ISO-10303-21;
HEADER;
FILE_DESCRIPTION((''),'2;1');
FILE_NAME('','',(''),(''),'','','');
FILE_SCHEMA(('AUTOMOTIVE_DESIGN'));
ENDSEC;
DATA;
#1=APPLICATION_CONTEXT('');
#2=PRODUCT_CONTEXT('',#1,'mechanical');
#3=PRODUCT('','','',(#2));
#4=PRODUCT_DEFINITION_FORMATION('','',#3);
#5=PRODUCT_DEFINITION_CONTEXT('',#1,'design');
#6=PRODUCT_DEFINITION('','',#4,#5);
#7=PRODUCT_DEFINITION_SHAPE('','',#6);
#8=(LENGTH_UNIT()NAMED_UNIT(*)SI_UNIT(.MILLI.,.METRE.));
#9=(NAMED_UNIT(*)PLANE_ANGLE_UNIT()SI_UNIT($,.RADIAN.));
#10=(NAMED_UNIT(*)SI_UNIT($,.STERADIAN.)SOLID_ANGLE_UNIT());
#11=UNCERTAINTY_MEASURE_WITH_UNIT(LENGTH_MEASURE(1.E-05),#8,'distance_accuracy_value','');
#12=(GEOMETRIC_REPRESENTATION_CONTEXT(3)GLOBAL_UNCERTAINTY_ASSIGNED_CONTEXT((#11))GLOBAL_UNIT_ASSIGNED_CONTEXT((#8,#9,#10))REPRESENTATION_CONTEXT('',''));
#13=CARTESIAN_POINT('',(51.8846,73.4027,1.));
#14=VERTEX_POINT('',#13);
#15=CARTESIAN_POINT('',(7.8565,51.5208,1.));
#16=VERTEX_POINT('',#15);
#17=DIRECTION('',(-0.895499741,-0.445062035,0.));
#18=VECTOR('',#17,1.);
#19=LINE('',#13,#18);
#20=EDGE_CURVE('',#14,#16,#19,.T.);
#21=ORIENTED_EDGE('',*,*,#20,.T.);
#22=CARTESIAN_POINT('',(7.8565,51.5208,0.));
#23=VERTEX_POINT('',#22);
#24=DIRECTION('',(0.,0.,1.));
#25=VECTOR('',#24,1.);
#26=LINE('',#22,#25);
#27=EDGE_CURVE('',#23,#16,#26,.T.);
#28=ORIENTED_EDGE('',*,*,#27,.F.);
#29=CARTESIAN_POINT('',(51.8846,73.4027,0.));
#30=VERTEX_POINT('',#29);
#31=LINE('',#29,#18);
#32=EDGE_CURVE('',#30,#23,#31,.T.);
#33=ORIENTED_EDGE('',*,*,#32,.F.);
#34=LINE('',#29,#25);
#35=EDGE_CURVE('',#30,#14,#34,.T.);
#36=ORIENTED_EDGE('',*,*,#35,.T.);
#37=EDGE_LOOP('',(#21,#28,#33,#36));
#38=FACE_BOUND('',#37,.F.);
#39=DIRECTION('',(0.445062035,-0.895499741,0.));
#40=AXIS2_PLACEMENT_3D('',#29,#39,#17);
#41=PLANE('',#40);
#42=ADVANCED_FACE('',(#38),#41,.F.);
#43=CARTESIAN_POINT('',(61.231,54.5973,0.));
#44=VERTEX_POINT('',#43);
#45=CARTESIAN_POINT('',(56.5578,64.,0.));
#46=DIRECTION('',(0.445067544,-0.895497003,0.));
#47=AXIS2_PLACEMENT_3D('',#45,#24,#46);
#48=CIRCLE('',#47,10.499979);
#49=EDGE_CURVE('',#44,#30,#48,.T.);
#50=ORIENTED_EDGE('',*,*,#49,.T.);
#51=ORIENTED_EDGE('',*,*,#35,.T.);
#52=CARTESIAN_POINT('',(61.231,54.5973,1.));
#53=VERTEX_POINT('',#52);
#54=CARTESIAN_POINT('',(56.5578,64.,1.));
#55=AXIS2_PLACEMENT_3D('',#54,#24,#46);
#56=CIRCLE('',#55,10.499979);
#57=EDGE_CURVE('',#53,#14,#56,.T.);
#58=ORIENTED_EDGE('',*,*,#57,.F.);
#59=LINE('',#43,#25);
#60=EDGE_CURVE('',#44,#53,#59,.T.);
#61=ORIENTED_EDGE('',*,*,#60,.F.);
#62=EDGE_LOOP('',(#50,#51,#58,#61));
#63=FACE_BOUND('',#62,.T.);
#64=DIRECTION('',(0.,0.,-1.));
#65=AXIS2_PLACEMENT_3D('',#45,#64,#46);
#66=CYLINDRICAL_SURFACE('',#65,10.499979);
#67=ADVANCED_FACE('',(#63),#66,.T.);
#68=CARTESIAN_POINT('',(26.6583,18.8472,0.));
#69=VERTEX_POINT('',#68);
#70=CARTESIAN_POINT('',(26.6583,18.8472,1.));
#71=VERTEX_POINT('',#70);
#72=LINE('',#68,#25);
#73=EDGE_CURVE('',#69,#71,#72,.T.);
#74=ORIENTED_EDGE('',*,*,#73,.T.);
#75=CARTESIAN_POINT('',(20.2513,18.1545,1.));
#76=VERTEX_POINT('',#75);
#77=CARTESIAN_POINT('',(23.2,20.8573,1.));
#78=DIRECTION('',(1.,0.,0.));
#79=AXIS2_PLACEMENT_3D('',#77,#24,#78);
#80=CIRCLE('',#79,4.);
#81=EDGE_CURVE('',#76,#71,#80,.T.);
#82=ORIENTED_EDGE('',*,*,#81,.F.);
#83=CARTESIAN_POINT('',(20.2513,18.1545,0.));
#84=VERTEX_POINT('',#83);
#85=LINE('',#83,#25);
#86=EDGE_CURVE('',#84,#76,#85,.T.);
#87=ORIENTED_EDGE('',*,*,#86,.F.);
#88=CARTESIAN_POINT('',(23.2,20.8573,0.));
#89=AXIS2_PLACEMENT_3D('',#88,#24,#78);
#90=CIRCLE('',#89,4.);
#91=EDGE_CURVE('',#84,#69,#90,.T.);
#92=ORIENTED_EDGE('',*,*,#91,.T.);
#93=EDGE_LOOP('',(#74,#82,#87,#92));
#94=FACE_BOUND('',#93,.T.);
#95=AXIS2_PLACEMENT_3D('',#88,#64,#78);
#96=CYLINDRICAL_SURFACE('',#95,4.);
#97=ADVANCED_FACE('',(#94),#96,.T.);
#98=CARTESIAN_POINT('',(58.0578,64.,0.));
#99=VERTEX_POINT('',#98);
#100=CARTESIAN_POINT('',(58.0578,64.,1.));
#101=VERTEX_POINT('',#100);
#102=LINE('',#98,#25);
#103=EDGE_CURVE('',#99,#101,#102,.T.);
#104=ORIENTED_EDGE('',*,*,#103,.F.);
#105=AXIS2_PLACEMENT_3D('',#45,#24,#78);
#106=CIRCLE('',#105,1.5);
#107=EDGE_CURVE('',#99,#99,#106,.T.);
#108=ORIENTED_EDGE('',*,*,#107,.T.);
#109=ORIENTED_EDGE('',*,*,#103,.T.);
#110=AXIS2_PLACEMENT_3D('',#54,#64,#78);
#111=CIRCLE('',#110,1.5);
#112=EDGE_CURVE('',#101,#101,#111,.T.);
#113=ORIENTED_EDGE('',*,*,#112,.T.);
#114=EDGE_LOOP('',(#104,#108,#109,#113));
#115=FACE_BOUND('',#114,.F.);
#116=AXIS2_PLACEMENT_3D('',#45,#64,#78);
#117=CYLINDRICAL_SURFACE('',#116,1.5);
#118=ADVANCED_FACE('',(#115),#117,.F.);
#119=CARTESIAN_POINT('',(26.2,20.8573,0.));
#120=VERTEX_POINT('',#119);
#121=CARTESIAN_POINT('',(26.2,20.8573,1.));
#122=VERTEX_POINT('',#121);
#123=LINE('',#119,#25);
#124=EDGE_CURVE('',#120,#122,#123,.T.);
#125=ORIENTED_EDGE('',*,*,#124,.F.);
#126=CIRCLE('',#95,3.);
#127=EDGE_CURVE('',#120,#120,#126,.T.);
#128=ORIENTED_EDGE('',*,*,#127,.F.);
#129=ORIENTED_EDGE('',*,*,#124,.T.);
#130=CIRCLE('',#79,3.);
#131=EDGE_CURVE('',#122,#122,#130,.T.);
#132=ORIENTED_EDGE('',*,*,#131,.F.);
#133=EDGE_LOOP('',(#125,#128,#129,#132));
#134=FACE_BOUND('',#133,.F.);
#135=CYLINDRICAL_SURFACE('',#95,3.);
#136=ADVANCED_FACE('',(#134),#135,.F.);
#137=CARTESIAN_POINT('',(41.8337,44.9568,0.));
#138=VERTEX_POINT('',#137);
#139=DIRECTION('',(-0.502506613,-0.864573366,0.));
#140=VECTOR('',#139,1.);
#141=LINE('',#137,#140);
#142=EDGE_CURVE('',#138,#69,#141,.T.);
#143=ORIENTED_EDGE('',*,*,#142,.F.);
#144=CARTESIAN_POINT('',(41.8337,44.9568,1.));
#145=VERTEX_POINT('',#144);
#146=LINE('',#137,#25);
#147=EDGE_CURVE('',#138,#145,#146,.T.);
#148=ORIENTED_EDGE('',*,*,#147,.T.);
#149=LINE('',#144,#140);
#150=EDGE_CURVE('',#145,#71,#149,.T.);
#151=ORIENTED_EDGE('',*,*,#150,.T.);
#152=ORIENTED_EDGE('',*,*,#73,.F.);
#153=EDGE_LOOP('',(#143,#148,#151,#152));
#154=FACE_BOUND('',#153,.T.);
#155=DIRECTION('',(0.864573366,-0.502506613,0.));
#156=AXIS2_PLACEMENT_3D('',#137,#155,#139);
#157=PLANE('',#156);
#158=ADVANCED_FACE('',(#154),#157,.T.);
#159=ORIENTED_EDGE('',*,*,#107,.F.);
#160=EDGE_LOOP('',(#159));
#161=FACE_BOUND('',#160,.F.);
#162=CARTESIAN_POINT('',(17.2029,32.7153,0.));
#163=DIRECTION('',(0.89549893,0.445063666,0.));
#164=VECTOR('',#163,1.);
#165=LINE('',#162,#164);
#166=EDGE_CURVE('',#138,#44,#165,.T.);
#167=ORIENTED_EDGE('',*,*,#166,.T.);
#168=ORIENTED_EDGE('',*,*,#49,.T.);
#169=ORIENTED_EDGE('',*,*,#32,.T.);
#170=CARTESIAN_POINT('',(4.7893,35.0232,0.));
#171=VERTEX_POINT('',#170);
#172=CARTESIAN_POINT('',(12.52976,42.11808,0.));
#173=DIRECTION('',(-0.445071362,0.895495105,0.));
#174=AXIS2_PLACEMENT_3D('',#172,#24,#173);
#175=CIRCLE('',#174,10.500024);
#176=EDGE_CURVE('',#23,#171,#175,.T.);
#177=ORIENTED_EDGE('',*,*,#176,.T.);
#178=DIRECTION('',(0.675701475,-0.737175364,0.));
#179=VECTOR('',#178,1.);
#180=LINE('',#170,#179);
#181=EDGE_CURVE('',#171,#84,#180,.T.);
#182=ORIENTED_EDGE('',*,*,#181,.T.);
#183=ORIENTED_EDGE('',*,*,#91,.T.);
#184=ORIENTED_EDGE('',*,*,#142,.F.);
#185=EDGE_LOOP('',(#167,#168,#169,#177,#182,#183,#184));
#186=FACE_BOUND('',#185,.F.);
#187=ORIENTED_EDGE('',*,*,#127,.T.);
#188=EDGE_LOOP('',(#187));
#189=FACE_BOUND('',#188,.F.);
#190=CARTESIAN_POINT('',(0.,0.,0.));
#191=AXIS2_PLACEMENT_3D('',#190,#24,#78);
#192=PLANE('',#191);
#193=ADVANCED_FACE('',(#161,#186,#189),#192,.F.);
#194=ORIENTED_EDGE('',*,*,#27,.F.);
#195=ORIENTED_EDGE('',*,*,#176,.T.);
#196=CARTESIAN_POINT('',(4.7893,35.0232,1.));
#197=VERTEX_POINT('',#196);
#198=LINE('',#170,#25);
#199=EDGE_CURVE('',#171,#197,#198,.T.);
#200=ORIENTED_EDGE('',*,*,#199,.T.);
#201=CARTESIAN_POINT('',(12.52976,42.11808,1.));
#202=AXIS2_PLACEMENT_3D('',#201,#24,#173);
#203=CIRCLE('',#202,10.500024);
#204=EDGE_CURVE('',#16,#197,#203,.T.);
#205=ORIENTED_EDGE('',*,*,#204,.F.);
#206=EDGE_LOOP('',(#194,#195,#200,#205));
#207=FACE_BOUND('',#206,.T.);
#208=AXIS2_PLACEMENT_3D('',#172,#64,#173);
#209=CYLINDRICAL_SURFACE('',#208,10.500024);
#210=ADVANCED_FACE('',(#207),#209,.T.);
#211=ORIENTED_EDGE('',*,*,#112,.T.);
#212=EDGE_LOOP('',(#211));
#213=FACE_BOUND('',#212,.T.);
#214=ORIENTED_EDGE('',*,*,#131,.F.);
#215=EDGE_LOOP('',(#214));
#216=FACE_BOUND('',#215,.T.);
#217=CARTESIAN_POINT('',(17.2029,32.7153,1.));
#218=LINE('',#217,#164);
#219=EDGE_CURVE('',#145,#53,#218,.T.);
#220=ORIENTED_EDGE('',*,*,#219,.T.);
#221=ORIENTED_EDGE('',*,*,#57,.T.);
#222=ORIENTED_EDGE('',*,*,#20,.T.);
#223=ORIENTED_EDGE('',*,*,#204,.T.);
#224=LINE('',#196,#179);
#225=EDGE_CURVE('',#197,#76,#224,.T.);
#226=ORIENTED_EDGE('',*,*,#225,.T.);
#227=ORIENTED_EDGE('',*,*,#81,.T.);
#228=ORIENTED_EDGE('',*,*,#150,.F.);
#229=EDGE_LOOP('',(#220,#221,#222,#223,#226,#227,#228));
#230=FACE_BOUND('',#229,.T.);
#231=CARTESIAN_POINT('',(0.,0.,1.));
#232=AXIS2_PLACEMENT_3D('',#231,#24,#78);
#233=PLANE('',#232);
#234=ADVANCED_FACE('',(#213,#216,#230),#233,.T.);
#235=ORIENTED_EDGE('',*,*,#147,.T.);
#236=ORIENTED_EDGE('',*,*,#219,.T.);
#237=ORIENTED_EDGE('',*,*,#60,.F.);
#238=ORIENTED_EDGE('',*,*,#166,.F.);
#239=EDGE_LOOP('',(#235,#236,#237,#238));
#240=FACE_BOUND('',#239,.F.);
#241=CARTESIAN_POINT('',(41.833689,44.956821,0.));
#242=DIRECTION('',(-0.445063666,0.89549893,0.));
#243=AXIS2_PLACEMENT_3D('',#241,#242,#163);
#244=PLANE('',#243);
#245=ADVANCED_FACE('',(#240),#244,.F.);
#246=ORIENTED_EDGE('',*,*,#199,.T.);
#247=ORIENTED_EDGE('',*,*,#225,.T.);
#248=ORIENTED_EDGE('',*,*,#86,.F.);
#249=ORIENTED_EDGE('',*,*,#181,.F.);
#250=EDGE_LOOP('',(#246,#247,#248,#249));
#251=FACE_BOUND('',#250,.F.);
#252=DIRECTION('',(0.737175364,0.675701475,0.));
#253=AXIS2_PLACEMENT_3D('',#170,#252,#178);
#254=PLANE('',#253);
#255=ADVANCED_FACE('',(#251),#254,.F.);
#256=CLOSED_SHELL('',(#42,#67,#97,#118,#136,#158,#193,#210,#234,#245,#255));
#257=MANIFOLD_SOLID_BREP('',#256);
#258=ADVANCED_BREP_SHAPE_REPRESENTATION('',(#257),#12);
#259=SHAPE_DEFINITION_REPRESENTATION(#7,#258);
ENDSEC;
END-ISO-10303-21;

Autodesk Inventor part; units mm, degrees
ref_plane "YZ Plane" through (0, 0, 0) normal (1, 0, 0) x (0, 1, 0)
ref_plane "XZ Plane" through (0, 0, 0) normal (0, 1, 0) x (-1, 0, 0)
ref_plane "XY Plane" through (0, 0, 0) normal (0, 0, 1) x (1, 0, 0)
sketch "スケッチ1" plane through (0, 0, 0) normal (0, 0, 1) x (1, 0, 0)
  circle A0 centre (23.2, 20.8573) radius 3
  circle A1 centre (56.5578, 64) radius 1.5
  line L0 (23.2, 20.8573) -> (56.5578, 64)
  line L1 (23.2, 20.8573) -> (56.5578, 64) construction
  circle A2 centre (56.5578, 64) radius 1.5
  line L2 (23.2, 20.8573) -> (12.5297, 42.1181)
  line L3 (12.5297, 42.1181) -> (56.5578, 64) construction
  line L4 (17.2029, 32.7153) -> (61.231, 54.5973)
  line L5 (51.8846, 73.4027) -> (7.8565, 51.5208)
  arc A3 (7.8565, 51.5208) -> (17.2029, 32.7153) centre (12.5297, 42.1181) ccw
  arc A4 (61.231, 54.5973) -> (51.8846, 73.4027) centre (56.5578, 64) ccw
  circle A5 centre (23.2, 20.8573) radius 4
  line L6 (4.7893, 35.0232) -> (20.2513, 18.1545)
  line L7 (41.8337, 44.9568) -> (26.6583, 18.8472)
  point P0 (0, 0)
  point P1 (0, 0)
  point P2 (39.8789, 42.4286)
  point P3 (34.5437, 53.059)
  point P4 (26.2844, 23.4042)
  point P5 (20.1698, 18.2461)
  point P6 (25.5392, 22.7356)
  point P7 (21.8543, 23.5385)
  point P8 (21.4058, 24.4323)
  point P9 (25.6467, 24.0217)
  point P10 (25.035, 23.2306)
  dimension "d6" = 3
  dimension "d7" = 21
  dimension "d8" = 8
extrude "押し出し1" add sketch "スケッチ1" along normal blind 1 contours A0 L0 A5 L2 | A0 L2 A5 L0 | A5 L2 L4 L0 | L0 L7 A5 | A5 L6 A3 L4 L2 | L4 A3 L5 A4
properties part number "ダンパーガード" material "ポリカーボネート、クリア"
